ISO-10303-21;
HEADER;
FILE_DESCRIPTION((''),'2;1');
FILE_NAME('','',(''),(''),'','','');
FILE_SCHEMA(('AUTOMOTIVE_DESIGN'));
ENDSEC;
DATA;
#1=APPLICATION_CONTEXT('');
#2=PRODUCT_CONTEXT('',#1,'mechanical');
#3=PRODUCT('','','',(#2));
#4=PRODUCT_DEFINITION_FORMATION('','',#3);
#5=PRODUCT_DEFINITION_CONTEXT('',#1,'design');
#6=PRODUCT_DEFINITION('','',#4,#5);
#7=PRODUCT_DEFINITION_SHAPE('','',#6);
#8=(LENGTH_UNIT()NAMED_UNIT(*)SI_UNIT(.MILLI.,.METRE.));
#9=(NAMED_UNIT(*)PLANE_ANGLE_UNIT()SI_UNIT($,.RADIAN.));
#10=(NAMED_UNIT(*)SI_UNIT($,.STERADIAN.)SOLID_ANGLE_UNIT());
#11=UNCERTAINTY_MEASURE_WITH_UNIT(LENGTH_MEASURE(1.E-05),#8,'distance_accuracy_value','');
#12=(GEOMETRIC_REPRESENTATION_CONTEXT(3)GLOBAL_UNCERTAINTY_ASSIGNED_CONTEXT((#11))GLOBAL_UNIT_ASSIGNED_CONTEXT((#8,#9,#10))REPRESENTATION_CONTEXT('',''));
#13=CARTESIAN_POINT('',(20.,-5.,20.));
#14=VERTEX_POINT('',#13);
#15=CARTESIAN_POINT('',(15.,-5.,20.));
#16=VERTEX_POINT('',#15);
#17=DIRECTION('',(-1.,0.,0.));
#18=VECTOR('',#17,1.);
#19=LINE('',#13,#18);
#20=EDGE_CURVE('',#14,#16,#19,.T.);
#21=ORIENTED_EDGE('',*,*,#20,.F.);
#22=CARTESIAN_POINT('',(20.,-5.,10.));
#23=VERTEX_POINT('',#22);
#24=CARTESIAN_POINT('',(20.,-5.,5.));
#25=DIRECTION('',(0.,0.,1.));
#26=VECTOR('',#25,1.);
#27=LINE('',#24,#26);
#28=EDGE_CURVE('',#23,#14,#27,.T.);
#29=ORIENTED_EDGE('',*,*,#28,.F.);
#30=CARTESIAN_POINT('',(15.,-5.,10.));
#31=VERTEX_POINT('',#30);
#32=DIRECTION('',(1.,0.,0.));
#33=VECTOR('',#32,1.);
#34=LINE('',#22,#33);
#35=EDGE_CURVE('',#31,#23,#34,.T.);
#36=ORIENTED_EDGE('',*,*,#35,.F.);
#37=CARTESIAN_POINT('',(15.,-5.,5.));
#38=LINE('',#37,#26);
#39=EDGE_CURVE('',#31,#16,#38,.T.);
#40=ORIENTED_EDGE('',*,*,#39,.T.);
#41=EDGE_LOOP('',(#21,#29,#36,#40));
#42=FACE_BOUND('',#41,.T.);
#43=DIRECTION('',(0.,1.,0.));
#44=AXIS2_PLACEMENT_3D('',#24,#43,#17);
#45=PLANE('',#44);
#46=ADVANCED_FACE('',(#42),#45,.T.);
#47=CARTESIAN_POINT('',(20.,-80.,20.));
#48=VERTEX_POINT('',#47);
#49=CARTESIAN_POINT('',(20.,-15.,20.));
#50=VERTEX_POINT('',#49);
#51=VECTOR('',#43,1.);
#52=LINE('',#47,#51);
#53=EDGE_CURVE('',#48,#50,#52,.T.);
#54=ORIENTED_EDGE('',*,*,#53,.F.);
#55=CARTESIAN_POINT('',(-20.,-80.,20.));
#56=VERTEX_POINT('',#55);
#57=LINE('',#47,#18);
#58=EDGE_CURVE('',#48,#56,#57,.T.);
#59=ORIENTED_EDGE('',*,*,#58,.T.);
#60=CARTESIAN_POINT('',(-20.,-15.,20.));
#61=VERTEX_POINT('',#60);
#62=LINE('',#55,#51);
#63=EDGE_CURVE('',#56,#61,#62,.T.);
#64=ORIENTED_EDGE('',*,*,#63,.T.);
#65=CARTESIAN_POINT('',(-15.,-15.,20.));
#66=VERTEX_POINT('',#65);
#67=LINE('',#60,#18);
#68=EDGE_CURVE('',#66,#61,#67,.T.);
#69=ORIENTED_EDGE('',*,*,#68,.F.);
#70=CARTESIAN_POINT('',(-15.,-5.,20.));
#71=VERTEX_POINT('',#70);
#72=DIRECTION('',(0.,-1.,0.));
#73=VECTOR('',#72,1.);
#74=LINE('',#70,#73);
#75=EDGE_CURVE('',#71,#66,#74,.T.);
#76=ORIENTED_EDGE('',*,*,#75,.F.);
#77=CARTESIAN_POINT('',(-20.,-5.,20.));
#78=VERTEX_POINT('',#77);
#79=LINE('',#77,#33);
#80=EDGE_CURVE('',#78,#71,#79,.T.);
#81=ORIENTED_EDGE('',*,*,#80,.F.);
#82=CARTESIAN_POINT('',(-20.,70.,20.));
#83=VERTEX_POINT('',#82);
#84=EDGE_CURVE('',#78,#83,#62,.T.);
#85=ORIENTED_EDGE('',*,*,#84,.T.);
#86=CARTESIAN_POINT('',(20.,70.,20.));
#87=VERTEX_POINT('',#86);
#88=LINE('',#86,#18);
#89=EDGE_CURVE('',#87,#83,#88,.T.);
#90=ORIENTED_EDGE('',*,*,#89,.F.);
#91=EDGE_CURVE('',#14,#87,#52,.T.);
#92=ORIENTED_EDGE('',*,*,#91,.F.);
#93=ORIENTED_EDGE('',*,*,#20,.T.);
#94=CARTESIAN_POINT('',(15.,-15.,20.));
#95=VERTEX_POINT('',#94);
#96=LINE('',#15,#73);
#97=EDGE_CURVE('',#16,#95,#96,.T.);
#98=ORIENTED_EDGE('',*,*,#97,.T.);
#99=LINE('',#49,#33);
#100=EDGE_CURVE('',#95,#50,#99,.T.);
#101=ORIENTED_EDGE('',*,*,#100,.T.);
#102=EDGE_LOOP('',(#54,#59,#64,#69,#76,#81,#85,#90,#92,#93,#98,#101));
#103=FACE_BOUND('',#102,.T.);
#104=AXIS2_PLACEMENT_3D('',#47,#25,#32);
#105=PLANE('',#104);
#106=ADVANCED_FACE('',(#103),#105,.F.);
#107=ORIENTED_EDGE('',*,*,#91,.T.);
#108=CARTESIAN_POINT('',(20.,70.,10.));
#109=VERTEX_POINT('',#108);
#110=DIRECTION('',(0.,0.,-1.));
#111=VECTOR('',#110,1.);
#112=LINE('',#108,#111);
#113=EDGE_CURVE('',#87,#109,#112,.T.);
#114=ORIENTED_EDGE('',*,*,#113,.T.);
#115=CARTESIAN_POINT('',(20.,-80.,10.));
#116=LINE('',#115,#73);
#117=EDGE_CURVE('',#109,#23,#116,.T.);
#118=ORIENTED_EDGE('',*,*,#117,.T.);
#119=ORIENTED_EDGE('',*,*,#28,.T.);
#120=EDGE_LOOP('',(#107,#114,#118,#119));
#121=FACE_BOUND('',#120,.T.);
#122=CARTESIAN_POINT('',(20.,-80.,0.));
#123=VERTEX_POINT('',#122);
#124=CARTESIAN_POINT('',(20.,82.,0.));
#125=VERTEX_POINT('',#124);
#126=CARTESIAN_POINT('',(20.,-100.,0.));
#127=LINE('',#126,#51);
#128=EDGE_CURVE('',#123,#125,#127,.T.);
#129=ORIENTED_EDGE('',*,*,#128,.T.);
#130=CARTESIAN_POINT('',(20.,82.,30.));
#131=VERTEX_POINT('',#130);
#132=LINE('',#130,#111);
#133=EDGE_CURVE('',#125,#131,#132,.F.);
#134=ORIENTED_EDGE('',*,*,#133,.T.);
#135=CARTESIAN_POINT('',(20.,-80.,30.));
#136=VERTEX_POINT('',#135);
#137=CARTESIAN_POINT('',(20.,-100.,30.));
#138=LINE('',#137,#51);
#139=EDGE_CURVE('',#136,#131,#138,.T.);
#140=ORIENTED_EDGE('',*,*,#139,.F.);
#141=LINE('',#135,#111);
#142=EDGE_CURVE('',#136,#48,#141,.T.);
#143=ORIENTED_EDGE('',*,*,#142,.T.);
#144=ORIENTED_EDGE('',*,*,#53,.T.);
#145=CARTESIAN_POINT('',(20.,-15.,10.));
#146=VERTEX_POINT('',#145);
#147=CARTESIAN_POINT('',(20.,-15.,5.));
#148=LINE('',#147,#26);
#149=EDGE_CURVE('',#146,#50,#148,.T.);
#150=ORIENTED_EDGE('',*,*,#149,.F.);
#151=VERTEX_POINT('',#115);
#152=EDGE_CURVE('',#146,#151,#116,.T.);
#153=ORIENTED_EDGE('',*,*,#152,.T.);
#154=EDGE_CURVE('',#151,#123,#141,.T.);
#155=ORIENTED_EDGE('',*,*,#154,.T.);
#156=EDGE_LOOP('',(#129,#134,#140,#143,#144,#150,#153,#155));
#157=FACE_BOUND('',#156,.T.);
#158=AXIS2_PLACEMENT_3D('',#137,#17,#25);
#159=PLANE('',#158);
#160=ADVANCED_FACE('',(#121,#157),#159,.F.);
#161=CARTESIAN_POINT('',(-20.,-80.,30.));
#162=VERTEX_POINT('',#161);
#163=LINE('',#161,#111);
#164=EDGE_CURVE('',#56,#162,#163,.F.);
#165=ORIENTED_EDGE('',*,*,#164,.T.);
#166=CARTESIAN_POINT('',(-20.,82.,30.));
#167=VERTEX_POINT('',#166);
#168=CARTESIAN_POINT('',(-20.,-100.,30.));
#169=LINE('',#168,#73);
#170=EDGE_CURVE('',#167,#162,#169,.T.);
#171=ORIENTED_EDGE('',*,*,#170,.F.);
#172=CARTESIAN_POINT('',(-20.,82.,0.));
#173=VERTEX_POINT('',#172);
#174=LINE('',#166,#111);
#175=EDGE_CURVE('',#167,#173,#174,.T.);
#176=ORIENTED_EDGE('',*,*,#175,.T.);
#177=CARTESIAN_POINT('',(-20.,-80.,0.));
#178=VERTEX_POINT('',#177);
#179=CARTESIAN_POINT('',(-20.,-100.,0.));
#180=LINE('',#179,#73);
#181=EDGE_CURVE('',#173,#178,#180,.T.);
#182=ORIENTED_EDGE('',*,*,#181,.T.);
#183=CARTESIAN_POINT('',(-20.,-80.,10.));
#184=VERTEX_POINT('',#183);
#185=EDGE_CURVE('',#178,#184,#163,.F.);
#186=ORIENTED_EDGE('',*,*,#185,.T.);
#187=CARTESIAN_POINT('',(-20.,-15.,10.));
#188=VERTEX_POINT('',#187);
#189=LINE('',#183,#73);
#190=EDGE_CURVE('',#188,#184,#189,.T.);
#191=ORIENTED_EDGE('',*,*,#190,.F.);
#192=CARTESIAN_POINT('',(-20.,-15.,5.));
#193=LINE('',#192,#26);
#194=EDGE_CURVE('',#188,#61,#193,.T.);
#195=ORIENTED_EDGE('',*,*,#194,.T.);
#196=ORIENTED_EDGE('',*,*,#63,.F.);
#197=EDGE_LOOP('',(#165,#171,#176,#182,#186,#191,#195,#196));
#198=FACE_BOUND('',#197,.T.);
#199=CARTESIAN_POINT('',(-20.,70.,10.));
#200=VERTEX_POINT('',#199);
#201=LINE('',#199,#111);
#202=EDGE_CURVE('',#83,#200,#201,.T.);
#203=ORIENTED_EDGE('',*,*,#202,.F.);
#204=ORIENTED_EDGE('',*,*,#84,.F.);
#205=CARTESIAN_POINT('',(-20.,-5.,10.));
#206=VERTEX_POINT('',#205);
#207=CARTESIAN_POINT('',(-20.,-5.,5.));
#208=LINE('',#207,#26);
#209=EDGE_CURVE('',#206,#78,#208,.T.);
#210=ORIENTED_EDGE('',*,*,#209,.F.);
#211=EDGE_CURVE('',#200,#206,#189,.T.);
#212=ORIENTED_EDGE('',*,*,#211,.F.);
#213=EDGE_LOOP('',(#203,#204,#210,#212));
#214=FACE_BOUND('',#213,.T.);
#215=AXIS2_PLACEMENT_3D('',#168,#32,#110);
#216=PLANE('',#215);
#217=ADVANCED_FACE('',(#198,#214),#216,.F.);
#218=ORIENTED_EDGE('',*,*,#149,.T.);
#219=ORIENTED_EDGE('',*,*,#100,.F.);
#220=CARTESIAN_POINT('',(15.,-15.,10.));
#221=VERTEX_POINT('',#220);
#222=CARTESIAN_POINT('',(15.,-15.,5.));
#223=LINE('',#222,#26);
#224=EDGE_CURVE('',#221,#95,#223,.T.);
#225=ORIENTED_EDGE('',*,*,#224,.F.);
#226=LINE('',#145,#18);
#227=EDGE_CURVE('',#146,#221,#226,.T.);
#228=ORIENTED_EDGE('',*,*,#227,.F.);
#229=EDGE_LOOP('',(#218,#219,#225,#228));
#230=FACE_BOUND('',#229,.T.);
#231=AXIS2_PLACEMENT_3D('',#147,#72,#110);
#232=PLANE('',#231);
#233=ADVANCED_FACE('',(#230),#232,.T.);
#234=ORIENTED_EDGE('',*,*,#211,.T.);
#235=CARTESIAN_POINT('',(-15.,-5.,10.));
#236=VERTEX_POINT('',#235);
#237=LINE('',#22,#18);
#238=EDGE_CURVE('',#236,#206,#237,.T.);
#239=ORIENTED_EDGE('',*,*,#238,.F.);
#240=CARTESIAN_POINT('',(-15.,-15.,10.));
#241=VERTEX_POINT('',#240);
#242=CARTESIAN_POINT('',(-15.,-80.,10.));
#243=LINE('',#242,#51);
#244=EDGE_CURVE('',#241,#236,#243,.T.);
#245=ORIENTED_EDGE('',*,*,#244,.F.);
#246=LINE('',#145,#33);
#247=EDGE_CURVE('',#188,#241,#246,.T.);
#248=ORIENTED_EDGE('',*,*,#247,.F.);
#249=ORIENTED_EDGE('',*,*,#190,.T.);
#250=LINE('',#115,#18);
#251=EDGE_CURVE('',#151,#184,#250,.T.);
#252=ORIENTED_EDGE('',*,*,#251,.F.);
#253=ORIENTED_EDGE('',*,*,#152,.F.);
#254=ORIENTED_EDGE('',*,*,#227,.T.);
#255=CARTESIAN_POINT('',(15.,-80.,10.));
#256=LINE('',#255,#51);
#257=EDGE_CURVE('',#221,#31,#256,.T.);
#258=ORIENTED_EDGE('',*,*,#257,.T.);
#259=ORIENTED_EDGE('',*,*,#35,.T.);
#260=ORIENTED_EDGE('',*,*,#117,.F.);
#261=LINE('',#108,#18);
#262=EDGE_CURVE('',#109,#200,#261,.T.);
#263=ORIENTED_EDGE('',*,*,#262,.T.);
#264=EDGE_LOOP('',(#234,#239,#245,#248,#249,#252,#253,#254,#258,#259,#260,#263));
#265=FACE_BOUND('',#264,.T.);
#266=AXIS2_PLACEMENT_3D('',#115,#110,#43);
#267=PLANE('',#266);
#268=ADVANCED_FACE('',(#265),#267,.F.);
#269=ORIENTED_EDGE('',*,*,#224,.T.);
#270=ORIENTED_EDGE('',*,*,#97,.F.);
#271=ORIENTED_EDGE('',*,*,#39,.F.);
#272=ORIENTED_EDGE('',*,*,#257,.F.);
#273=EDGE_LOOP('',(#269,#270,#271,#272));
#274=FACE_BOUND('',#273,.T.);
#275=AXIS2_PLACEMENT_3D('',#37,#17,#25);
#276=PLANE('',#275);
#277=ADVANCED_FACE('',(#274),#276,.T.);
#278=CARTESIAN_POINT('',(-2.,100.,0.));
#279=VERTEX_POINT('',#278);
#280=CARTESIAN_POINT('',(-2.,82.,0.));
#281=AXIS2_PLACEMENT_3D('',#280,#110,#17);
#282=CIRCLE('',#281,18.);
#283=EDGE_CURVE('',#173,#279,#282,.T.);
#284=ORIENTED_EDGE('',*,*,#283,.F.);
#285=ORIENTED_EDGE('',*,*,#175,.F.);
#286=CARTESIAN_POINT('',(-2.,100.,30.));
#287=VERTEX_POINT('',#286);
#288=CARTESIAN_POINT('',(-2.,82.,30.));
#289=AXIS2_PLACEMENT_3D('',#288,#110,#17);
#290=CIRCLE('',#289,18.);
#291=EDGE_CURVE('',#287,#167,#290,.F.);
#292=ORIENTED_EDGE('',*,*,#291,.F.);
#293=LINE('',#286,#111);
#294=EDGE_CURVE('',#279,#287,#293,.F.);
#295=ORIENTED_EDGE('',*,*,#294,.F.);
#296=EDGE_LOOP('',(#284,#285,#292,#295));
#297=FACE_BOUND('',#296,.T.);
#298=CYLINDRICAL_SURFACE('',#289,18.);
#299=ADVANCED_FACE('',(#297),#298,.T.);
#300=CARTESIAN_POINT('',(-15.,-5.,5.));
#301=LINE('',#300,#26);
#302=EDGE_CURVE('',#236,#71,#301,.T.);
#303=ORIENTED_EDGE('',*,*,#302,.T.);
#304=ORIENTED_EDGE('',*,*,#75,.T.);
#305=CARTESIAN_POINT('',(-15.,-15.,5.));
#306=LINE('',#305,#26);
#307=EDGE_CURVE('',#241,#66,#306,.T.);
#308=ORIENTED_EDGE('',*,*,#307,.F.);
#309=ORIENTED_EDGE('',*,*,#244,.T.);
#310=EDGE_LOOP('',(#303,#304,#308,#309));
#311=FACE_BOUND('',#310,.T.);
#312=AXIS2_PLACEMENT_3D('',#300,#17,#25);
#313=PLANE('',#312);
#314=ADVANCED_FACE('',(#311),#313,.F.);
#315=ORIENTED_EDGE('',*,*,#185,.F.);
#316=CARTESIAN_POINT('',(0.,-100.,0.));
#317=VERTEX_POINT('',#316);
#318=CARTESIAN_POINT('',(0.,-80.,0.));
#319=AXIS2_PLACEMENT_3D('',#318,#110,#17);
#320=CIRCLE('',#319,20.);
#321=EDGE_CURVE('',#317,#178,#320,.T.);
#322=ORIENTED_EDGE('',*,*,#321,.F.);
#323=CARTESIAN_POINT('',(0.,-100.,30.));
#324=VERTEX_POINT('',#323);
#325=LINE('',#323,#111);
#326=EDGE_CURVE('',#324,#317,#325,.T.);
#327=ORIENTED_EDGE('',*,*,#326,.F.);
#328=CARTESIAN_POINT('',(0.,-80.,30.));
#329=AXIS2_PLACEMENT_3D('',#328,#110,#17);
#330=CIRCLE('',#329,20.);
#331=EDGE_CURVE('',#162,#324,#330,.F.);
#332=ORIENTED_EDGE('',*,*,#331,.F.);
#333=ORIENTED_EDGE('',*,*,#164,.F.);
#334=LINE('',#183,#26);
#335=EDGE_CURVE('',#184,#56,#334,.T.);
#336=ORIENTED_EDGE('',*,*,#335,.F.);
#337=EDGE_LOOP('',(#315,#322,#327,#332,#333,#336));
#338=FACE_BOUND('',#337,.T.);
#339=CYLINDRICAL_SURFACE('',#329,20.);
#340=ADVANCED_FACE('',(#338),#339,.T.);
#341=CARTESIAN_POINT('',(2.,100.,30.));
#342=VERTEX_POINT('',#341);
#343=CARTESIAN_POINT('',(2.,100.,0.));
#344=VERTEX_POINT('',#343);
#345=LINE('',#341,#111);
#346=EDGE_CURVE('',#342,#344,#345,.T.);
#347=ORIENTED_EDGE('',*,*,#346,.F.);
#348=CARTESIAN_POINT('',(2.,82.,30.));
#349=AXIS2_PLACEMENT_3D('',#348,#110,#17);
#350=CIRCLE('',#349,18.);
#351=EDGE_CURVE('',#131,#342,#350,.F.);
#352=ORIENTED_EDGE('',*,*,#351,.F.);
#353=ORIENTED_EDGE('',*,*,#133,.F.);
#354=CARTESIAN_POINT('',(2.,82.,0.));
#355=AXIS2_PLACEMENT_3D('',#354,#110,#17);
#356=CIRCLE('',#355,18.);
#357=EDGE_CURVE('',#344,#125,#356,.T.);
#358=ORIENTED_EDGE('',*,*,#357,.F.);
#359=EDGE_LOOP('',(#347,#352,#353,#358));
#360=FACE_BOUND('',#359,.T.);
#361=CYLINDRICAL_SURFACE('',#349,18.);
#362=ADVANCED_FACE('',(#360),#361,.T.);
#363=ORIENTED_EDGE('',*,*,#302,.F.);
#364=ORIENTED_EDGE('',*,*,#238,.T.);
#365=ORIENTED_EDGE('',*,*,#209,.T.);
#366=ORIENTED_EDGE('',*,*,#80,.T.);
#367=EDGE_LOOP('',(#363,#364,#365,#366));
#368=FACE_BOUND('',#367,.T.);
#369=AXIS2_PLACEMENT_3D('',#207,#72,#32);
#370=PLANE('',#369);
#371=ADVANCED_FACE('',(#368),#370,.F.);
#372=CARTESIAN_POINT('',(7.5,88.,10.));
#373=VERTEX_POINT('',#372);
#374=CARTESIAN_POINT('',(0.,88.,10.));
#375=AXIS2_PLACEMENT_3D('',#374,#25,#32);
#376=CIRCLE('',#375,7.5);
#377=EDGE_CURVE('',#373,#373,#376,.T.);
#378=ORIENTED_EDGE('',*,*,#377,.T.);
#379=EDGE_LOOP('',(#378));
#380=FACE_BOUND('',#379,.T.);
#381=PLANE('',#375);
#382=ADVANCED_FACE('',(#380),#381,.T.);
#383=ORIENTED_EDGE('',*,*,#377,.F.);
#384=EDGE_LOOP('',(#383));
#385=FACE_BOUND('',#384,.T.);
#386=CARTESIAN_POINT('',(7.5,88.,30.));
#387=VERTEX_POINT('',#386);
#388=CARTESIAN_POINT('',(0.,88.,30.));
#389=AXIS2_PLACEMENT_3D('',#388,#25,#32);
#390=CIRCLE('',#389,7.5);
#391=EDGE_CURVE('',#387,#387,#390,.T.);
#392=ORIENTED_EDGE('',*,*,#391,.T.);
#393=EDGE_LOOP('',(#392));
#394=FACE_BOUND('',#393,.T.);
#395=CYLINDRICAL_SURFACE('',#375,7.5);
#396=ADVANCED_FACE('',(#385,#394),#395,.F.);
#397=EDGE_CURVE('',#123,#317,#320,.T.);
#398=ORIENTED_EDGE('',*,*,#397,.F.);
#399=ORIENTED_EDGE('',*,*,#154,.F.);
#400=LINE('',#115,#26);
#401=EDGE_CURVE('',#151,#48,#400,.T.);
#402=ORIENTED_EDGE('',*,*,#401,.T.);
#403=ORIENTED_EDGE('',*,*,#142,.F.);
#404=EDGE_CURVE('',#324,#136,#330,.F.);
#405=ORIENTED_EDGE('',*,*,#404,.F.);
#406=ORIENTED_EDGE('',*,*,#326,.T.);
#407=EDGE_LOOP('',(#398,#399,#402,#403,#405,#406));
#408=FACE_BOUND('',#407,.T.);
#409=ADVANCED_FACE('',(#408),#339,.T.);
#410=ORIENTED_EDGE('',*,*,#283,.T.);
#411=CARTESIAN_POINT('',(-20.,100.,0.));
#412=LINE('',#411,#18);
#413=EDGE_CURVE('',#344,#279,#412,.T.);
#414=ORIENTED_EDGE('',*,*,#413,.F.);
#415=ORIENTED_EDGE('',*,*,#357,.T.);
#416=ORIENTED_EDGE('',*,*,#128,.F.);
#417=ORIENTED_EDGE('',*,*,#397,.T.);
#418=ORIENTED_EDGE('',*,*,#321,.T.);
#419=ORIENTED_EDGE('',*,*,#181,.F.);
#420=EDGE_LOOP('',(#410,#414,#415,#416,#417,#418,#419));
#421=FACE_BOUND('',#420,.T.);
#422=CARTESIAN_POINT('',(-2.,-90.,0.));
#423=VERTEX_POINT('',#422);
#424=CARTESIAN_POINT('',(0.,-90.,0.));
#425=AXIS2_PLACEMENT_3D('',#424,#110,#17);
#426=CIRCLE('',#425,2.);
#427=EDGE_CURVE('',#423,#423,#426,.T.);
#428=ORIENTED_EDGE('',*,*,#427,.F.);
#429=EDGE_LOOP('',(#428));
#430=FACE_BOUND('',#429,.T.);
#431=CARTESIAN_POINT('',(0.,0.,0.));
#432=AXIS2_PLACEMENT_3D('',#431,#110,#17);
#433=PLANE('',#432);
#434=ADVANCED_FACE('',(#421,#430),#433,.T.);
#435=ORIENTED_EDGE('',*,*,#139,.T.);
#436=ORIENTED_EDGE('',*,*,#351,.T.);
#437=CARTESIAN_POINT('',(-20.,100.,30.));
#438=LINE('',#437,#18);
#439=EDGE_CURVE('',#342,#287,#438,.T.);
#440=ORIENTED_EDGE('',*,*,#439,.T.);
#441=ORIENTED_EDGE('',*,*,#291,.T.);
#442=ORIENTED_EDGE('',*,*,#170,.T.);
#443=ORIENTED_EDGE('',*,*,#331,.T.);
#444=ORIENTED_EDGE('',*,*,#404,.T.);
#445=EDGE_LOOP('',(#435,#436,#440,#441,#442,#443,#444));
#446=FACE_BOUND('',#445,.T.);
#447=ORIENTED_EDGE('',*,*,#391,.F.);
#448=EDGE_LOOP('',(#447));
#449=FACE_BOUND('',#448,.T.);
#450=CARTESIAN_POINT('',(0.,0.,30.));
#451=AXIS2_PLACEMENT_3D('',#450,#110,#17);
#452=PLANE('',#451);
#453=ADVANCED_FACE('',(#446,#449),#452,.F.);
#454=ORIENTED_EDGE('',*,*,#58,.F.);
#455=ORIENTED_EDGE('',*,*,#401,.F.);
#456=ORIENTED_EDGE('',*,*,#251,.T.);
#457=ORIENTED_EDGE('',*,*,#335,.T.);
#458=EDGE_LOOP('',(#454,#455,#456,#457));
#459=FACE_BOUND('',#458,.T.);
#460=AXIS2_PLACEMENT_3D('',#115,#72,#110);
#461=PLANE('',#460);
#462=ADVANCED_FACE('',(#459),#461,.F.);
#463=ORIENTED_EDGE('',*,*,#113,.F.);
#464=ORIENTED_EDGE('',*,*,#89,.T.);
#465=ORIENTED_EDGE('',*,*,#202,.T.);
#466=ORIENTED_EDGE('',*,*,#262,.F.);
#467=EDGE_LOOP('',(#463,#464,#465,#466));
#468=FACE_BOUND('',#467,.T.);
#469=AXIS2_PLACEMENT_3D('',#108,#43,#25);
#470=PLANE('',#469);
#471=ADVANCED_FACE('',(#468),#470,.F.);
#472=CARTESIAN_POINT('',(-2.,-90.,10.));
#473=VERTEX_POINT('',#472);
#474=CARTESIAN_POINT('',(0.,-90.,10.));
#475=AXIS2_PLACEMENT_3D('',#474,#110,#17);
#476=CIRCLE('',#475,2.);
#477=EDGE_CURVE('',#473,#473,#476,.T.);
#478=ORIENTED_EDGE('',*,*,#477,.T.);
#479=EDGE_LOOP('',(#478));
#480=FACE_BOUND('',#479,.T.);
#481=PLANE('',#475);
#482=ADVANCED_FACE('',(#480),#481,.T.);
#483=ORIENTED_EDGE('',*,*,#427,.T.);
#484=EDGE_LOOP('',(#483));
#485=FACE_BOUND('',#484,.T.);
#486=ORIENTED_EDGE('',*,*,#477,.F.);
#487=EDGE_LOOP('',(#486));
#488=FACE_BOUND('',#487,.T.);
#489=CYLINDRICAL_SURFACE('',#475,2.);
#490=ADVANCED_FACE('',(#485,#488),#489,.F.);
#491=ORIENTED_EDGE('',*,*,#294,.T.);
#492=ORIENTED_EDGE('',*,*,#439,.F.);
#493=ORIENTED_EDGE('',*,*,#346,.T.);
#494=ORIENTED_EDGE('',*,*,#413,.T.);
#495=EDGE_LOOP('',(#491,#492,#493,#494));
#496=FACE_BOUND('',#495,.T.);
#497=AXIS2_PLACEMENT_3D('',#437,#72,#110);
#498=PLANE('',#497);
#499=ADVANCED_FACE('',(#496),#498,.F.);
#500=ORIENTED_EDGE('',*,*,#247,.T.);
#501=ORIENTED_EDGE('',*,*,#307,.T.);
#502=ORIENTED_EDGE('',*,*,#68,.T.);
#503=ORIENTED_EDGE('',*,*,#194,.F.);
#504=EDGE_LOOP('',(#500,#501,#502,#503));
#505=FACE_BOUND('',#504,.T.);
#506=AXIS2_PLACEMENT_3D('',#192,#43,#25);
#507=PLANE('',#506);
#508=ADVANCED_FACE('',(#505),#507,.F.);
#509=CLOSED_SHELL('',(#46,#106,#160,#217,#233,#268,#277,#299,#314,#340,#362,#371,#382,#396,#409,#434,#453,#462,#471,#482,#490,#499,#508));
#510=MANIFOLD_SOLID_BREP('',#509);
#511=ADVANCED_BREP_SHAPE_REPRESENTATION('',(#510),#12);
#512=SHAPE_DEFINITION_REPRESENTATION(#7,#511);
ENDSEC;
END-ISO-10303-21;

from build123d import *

# Parameters (mm, degrees)
SKETCH2_W           = 40
SKETCH2_H           = 200
BOSS_EXTRUDE1_DEPTH = 30
SKETCH3_R           = 2
CUT_EXTRUDE1_DEPTH  = 10
FILLET1_R           = 20
SKETCH5_R           = 7.5
CUT_EXTRUDE3_DEPTH  = 20
FILLET2_R           = 18
SKETCH6_W           = 10
SKETCH6_H           = 150
CUT_EXTRUDE4_DEPTH  = 112.803398875
SKETCH7_W           = 5
SKETCH7_H           = 10
BOSS_EXTRUDE2_DEPTH = 15


with BuildPart() as part:
    # Sketch2 → Boss-Extrude1 (new body)
    with BuildSketch(Plane.XY):
        Rectangle(SKETCH2_W, SKETCH2_H)
    extrude(amount=BOSS_EXTRUDE1_DEPTH)

    # Sketch3 → Cut-Extrude1 (cut)
    with BuildSketch(Plane(origin=(0, 0, 0), x_dir=(-1, 0, 0), z_dir=(0, 0, -1))):
        with Locations((0, -90)):
            Circle(SKETCH3_R)
    extrude(amount=-CUT_EXTRUDE1_DEPTH, mode=Mode.SUBTRACT)

    # Fillet1
    fillet1_edges = [part.edges().sort_by_distance(p)[0] for p in [
        (20, -100, 15),
        (-20, -100, 15),
    ]]
    fillet(fillet1_edges, radius=FILLET1_R - 0.0001)  # a hair under: the kernel refuses the full size

    # Sketch5 → Cut-Extrude3 (cut)
    with BuildSketch(Plane.XY.offset(30)):
        with Locations((0, 88)):
            Circle(SKETCH5_R)
    extrude(amount=-CUT_EXTRUDE3_DEPTH, mode=Mode.SUBTRACT)

    # Fillet2
    fillet2_edges = [part.edges().sort_by_distance(p)[0] for p in [
        (-20, 100, 15),
        (20, 100, 15),
    ]]
    fillet(fillet2_edges, radius=FILLET2_R)

    # Sketch6 → Cut-Extrude4 (cut, through all)
    with BuildSketch(Plane.ZY.offset(20)):
        with Locations((15, -5)):
            Rectangle(SKETCH6_W, SKETCH6_H)
    extrude(amount=-CUT_EXTRUDE4_DEPTH, mode=Mode.SUBTRACT)

    # Sketch7 → Boss-Extrude2 (add)
    with BuildSketch(Plane(origin=(0, 0, 20), x_dir=(-1, 0, 0), z_dir=(0, 0, -1))):
        with Locations((17.5, -10)):
            Rectangle(SKETCH7_W, SKETCH7_H)
    boss_extrude2 = extrude(amount=BOSS_EXTRUDE2_DEPTH)

    # Mirror1: Boss-Extrude2 across plane
    add(boss_extrude2.mirror(Plane(origin=(0, 0, 0), x_dir=(0, 0, 1), z_dir=(1, 0, 0))))


solid = part.part
